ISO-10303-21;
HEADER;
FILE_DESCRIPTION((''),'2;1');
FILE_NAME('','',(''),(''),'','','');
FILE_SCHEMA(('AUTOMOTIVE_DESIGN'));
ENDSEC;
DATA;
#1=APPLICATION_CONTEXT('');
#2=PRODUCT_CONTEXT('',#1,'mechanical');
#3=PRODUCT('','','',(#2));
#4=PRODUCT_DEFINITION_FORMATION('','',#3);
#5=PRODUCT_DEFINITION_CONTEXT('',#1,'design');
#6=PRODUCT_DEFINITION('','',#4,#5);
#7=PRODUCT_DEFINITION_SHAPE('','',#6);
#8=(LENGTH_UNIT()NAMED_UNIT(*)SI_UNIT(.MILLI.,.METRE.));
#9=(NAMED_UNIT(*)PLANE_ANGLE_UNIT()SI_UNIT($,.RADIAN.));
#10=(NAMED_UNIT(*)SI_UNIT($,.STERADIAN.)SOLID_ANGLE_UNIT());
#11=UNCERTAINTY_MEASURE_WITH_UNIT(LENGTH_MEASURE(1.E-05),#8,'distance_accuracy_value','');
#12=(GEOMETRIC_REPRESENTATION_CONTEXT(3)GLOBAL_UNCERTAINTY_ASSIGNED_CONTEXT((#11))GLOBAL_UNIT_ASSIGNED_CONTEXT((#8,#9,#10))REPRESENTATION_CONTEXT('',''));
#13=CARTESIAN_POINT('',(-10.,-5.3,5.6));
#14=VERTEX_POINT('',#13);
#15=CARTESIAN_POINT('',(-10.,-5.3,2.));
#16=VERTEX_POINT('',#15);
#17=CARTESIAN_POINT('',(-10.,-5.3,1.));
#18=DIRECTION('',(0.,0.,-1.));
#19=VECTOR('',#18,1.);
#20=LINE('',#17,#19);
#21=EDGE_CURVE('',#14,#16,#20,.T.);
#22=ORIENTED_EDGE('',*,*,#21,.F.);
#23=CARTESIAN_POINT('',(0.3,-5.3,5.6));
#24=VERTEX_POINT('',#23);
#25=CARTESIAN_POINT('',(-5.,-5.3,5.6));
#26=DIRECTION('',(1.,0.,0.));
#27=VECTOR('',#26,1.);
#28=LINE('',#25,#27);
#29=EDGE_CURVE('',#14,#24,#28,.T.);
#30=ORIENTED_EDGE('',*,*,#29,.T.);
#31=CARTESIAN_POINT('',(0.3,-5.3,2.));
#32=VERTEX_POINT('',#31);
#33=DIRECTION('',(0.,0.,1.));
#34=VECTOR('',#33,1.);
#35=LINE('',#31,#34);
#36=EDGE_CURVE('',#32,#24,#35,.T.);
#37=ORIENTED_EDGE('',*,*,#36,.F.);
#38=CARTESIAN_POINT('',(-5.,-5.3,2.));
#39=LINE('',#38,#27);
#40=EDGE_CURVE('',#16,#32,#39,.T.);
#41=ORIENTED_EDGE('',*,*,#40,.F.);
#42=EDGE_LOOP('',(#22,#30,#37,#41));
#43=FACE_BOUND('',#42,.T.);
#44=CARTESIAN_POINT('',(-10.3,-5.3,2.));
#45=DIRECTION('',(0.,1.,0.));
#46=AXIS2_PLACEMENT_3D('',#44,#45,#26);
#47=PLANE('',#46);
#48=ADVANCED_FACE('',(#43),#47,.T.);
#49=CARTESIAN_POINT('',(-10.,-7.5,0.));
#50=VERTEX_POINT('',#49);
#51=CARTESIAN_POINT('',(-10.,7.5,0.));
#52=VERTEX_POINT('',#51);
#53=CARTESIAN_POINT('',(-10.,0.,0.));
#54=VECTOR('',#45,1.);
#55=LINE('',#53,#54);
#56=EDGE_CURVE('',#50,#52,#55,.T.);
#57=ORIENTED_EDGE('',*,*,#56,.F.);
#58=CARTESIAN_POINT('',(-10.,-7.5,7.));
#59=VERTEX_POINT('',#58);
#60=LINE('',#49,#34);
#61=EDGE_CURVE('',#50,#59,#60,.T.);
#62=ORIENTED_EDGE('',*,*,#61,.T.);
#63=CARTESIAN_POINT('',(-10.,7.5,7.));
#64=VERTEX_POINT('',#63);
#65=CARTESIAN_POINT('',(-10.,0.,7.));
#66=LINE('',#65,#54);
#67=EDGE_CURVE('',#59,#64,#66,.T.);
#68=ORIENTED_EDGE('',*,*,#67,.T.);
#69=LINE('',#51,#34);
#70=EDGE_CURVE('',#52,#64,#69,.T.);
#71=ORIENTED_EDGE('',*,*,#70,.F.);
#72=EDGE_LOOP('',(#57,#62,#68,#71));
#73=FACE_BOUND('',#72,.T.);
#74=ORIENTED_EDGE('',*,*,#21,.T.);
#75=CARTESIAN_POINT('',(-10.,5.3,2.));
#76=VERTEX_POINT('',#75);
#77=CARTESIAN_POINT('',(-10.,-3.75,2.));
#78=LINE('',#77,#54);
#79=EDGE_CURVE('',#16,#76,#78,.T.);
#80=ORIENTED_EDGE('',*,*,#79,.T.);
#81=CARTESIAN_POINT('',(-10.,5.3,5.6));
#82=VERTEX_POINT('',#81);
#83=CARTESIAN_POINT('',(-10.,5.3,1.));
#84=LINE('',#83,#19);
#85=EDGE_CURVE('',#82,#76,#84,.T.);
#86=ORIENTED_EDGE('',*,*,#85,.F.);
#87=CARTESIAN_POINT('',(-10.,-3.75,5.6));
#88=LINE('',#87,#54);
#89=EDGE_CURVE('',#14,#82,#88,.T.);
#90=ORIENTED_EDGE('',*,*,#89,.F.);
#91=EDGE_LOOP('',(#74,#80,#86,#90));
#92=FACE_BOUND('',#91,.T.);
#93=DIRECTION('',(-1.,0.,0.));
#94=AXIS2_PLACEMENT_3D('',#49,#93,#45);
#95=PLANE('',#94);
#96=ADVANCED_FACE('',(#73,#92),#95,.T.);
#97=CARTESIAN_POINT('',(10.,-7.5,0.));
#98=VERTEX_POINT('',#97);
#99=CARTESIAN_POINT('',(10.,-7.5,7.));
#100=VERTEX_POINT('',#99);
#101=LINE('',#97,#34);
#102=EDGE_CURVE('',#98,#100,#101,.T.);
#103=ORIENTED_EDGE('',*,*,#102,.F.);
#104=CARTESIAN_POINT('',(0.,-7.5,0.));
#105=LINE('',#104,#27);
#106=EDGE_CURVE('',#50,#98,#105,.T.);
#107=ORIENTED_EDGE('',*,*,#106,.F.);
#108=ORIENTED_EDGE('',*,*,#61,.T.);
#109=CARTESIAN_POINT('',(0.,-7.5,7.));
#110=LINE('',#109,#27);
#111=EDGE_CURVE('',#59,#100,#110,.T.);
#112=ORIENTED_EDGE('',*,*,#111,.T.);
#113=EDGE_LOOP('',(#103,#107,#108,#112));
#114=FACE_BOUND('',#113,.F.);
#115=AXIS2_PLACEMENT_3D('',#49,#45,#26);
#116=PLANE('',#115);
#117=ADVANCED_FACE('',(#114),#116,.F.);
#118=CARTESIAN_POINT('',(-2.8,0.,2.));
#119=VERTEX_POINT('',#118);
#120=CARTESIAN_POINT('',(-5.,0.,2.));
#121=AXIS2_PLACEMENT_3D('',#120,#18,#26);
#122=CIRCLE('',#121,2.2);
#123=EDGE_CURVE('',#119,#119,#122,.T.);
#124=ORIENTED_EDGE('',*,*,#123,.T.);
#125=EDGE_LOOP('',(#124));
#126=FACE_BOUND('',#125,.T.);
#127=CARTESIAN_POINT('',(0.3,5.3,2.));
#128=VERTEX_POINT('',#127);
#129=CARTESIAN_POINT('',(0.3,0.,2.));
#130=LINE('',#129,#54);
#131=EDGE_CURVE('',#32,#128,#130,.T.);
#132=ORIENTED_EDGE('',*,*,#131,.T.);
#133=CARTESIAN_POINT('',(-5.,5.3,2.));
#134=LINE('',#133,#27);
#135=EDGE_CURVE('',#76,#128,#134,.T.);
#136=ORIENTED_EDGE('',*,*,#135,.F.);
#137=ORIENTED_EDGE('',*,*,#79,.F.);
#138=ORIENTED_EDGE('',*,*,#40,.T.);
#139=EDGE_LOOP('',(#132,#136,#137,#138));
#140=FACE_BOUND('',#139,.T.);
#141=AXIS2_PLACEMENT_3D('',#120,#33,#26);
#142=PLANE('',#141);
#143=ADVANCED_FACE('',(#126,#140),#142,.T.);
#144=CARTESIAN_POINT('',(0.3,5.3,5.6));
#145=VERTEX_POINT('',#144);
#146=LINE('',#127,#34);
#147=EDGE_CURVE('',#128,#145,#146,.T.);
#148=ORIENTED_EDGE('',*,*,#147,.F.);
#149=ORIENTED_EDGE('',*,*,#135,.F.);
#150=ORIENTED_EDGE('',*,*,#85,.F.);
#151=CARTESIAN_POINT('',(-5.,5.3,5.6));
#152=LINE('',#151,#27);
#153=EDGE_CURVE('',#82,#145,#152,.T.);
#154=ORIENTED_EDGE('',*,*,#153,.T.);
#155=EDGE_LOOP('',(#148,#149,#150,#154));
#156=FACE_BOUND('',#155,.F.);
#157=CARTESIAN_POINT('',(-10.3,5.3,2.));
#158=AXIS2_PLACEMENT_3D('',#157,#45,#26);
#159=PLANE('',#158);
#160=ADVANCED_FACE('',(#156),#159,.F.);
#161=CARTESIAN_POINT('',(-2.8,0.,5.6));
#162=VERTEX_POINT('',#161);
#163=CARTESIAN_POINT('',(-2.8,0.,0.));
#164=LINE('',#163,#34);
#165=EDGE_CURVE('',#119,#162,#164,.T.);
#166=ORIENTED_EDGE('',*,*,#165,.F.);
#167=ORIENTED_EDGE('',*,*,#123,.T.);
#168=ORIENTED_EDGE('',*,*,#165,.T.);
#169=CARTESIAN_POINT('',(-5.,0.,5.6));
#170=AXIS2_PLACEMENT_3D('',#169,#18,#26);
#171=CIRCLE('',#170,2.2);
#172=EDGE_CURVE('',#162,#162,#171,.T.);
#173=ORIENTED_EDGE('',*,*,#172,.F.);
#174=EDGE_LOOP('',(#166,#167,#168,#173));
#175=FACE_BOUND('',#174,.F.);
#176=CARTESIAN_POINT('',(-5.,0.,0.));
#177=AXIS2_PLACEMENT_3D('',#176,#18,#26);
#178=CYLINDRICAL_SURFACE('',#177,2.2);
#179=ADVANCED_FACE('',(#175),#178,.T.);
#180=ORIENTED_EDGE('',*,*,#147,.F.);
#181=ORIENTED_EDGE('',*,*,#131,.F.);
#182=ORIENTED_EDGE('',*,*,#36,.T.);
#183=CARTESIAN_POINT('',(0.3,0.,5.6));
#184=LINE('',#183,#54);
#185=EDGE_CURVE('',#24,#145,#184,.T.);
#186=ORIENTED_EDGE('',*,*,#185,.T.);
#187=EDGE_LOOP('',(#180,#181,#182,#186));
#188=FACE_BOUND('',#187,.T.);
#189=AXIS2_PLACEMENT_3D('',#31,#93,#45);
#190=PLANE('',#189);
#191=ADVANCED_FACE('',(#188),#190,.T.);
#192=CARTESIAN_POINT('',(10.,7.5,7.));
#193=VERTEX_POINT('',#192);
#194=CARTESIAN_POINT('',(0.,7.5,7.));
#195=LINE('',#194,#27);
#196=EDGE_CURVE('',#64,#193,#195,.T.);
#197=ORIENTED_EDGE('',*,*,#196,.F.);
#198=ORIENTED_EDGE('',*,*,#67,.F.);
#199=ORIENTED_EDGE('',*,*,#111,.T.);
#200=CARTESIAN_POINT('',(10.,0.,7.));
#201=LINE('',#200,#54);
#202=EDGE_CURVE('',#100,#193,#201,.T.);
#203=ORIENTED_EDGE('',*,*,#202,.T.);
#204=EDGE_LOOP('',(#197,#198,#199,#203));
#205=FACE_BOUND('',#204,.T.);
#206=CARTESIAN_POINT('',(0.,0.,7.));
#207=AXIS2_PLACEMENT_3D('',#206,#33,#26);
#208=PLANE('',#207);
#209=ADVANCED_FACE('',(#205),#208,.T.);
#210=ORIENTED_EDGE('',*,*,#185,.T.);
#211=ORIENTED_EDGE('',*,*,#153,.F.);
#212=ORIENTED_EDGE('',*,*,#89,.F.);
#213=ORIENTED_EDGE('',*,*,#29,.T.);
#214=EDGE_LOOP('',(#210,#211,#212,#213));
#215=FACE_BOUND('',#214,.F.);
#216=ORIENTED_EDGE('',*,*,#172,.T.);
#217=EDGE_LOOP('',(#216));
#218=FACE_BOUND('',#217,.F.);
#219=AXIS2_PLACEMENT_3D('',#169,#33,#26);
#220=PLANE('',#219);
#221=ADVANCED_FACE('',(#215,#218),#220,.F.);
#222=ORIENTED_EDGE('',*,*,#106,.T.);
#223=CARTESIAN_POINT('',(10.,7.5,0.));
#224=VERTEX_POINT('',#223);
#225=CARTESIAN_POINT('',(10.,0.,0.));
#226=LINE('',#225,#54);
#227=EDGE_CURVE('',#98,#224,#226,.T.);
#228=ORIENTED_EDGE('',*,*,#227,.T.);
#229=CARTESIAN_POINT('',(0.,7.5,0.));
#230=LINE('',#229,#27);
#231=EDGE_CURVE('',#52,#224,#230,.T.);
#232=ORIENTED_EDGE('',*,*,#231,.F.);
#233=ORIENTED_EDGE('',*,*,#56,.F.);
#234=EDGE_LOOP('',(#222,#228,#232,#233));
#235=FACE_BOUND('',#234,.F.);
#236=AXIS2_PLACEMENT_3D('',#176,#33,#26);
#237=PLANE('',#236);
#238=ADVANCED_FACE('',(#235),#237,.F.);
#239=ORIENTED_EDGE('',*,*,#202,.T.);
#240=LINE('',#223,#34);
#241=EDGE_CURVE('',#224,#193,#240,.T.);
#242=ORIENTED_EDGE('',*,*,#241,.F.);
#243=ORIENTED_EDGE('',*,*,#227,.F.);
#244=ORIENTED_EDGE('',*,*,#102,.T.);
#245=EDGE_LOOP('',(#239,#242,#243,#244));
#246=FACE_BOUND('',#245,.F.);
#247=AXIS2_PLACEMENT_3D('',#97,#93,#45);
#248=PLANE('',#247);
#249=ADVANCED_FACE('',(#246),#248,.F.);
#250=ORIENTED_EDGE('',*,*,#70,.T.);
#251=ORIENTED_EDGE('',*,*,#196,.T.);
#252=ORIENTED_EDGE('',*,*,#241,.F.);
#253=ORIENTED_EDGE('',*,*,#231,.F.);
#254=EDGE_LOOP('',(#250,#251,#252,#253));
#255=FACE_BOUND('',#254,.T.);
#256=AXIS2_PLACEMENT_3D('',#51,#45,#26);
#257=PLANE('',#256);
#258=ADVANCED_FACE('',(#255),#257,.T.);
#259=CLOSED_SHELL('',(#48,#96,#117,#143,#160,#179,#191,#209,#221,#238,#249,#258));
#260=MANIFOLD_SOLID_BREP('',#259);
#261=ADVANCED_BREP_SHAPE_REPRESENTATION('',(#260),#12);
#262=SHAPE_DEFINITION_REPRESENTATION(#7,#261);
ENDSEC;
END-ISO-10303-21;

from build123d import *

# Parameters (mm, degrees)
F0_W     = 20
F0_H     = 15
F1_DEPTH = 7
F3_W     = 10.6
F3_H     = 10.6
F4_DEPTH = 3.6
F5_R     = 2.2
F6_DEPTH = 7


with BuildPart() as f1:
    # F0 (on Top) → F1 (new body)
    with BuildSketch(Plane.XY):
        Rectangle(F0_W, F0_H)
    extrude(amount=F1_DEPTH)

    # F3 (on offset) → F4 (cut)
    with BuildSketch(Plane.XY.offset(2)):
        with Locations((-5, 0)):
            Rectangle(F3_W, F3_H)
    extrude(amount=F4_DEPTH, mode=Mode.SUBTRACT)

    # F5 (on Top) → F6 (join, through all)
    with BuildSketch(Plane.XY):
        with Locations((-5, 0)):
            Circle(F5_R)
    extrude(amount=F6_DEPTH)


solid = f1.part
